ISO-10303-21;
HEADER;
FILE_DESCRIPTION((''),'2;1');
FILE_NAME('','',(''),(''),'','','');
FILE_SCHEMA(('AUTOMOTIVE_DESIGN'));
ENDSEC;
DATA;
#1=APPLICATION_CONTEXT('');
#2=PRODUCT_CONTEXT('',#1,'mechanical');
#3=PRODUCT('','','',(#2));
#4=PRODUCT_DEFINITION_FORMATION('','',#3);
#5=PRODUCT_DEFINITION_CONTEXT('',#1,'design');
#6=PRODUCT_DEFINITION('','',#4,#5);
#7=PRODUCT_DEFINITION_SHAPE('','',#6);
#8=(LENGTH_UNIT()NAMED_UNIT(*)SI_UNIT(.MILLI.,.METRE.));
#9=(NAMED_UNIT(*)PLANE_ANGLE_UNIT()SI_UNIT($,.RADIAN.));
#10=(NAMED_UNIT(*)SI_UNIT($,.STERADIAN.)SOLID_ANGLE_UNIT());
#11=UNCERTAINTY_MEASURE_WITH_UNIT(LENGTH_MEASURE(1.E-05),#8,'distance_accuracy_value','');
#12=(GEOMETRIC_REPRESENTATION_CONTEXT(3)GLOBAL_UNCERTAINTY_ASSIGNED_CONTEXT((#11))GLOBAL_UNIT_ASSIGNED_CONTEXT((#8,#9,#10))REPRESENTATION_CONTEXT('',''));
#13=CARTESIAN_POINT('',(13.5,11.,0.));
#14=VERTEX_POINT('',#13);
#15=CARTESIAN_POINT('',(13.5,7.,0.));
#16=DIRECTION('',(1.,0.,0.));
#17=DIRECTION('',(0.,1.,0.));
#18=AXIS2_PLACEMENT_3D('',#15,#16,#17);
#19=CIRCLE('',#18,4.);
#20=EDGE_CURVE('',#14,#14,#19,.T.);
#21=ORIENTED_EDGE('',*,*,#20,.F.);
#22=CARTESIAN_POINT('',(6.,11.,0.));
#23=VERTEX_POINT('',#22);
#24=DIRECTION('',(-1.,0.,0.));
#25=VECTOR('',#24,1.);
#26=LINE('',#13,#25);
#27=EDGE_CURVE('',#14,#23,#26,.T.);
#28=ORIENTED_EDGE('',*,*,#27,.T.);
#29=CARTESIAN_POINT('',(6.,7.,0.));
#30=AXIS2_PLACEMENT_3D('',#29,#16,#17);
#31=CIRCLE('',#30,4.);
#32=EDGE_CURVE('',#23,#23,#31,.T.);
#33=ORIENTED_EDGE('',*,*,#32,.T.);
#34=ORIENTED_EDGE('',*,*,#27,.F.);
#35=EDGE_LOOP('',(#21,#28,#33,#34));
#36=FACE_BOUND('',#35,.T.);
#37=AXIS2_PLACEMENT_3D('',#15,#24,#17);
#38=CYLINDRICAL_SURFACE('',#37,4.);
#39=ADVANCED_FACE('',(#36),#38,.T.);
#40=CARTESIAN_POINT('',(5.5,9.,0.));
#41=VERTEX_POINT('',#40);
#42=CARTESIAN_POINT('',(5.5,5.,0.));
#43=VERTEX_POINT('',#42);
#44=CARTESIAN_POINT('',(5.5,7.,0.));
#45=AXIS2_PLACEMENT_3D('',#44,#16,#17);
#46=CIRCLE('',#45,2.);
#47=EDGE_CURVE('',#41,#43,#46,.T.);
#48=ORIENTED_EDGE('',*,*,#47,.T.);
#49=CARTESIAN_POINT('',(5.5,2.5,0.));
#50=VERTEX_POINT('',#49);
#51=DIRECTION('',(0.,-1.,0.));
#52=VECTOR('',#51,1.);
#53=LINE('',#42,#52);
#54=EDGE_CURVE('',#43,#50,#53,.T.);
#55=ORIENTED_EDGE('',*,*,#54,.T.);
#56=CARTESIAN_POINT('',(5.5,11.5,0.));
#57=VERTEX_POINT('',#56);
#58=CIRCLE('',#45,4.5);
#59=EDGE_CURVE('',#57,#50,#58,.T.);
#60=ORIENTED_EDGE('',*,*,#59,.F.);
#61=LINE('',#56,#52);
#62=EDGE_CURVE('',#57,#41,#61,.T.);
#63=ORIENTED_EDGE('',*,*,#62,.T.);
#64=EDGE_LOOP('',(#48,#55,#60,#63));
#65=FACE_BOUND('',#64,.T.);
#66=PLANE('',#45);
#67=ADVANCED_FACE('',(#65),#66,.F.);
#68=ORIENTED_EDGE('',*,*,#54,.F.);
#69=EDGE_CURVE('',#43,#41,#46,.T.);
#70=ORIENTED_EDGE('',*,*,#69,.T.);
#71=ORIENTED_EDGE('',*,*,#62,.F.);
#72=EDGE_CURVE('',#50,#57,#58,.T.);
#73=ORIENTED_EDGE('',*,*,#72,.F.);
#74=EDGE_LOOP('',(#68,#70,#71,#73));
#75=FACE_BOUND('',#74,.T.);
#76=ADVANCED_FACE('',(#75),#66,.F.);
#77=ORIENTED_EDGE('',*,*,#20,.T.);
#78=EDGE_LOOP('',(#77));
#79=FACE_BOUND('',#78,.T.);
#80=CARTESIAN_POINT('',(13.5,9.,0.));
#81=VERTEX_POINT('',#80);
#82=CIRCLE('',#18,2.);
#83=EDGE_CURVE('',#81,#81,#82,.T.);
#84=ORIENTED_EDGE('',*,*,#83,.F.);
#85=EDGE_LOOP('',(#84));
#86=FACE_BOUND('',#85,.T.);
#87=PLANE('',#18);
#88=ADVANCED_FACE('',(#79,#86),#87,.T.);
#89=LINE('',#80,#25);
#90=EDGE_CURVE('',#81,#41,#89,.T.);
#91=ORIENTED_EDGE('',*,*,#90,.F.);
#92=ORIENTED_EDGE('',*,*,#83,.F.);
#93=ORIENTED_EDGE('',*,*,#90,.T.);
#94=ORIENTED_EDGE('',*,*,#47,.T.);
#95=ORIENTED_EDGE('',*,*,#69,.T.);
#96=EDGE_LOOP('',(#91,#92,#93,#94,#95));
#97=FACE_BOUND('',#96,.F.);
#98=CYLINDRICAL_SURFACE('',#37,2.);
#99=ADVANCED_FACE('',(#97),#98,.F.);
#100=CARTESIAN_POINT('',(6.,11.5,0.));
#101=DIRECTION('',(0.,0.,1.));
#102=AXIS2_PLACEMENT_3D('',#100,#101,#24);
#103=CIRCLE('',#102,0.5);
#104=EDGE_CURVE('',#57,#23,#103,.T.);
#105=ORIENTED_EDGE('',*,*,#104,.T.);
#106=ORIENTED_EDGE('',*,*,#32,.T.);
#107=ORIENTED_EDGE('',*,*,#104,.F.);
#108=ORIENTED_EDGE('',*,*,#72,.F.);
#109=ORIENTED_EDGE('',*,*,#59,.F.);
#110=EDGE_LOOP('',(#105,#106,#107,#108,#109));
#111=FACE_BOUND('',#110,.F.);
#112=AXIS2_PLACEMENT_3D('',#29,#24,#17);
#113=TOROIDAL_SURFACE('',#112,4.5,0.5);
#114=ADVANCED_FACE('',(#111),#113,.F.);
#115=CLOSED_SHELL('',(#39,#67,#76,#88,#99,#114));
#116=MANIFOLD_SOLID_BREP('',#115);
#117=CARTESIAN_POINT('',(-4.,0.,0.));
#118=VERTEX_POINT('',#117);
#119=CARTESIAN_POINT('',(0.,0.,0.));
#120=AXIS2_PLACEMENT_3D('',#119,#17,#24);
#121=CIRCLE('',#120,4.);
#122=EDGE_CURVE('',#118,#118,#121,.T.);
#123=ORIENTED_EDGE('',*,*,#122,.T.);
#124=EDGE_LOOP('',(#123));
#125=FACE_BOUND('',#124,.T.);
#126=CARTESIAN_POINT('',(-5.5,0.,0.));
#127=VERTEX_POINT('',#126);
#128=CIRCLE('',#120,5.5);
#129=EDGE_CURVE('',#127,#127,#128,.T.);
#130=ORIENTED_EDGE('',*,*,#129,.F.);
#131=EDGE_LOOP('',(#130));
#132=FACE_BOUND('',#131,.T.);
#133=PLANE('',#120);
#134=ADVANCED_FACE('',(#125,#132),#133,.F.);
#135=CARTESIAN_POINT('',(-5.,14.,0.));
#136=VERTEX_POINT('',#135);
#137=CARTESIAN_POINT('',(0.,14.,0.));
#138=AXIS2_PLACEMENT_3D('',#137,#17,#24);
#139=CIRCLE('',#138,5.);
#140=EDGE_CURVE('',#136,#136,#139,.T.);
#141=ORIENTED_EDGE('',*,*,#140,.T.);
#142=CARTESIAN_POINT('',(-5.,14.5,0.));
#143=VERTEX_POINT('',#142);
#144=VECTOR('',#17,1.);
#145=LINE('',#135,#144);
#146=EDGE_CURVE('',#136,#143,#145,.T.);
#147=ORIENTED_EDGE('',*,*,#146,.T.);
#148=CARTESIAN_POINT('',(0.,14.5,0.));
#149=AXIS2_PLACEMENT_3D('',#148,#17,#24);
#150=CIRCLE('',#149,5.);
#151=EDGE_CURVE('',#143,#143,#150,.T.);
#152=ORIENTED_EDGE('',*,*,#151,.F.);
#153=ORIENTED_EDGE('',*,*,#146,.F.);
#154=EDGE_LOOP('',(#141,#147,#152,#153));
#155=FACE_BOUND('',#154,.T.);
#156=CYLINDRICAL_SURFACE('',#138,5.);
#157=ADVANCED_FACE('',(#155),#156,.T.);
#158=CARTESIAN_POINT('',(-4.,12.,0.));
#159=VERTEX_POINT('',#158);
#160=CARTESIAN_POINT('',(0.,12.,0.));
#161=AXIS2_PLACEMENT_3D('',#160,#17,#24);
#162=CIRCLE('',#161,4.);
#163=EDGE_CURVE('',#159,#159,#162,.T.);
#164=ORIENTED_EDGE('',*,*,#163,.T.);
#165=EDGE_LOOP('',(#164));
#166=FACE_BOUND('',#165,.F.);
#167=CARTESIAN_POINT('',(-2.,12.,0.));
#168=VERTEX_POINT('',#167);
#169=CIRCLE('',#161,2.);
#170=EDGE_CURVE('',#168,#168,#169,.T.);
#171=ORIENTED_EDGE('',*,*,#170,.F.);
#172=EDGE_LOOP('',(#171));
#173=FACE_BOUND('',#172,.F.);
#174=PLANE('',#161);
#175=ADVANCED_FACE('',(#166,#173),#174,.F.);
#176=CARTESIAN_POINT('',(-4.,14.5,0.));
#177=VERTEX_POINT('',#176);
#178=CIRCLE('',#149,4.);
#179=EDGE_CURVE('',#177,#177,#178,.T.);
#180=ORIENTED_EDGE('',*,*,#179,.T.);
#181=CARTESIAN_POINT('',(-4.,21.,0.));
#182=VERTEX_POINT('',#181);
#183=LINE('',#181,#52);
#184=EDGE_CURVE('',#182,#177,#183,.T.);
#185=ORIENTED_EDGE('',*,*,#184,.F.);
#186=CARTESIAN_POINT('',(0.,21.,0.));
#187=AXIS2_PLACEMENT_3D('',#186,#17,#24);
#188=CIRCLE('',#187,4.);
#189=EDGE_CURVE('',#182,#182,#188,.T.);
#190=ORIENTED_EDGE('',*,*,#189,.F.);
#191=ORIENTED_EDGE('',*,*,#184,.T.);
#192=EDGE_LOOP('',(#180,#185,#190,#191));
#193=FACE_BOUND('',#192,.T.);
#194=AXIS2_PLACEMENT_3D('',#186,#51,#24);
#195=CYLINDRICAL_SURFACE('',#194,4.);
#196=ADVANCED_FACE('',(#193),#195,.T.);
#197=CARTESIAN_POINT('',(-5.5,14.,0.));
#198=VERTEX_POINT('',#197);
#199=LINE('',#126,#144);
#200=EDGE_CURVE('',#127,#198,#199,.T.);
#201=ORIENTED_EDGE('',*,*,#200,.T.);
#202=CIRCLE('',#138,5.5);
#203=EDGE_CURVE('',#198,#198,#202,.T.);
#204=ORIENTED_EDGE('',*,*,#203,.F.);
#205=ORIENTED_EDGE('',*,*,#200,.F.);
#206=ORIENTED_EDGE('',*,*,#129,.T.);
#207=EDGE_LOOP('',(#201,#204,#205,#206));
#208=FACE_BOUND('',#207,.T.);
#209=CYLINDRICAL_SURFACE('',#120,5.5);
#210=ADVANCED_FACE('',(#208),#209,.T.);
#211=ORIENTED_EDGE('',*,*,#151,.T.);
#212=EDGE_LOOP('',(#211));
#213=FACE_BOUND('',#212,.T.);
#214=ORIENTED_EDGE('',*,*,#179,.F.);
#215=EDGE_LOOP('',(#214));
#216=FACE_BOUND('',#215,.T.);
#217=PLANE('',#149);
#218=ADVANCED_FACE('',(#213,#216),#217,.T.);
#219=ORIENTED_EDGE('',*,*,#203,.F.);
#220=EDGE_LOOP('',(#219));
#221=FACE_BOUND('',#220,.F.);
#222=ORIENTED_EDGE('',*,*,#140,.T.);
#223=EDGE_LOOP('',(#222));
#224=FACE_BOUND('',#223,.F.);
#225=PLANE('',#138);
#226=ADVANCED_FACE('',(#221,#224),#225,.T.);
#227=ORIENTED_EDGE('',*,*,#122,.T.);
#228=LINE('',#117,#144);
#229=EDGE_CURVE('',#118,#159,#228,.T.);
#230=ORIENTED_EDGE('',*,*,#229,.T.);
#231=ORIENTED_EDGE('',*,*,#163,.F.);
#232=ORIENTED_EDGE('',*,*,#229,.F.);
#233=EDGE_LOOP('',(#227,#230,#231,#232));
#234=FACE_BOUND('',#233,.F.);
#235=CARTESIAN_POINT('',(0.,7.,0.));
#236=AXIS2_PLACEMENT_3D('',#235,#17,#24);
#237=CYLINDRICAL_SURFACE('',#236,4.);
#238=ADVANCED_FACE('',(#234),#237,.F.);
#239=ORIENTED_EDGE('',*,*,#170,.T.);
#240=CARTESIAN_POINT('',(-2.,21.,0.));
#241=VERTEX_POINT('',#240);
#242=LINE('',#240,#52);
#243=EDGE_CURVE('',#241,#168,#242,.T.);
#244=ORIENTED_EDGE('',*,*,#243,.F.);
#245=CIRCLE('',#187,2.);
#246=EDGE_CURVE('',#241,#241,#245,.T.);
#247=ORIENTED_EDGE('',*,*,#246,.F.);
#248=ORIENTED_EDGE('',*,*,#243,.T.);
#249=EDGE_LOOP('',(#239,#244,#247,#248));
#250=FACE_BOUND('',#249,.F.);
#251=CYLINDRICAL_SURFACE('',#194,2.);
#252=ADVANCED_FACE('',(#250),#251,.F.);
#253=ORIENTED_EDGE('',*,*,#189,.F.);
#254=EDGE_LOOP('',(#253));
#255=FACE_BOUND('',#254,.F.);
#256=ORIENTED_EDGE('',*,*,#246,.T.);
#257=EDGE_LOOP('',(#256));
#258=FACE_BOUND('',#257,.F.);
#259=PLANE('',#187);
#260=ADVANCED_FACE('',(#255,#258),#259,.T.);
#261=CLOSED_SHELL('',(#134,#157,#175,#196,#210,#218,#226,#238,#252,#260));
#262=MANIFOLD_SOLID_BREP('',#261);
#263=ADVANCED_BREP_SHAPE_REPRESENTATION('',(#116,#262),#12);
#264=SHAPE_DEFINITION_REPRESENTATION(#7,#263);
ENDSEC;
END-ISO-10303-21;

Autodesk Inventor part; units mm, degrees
ref_plane "YZ Plane" through (0, 0, 0) normal (1, 0, 0) x (0, 1, 0)
ref_plane "XZ Plane" through (0, 0, 0) normal (0, 1, 0) x (-1, 0, 0)
ref_plane "XY Plane" through (0, 0, 0) normal (0, 0, 1) x (1, 0, 0)
sketch "Boceto1" plane through (0, 0, 0) normal (0, 0, 1) x (1, 0, 0)
  line L0 (0, 0) -> (0, 21)
  line L1 (0, 7) -> (13.5, 7)
  line L2 (-2, 21) -> (-4, 21)
  line L3 (-4, 21) -> (-4, 14)
  line L4 (-4, 14) -> (-2, 14)
  line L5 (-2, 21) -> (-2, 14)
  line L6 (-4, 14) -> (-5, 14)
  line L7 (-5, 14) -> (-5, 14.5)
  line L8 (-5, 14.5) -> (-4, 14.5)
  line L9 (-5.5, 0) -> (-5.5, 14)
  line L10 (0, 0) -> (-5.5, 0)
  line L11 (-5, 14) -> (-5.5, 14)
  line L12 (-4, 0) -> (-4, 7)
  line L13 (-4, 7) -> (-4, 12)
  line L14 (-4, 12) -> (-2, 12)
  line L15 (-2, 12) -> (-2, 14)
  line L16 (13.5, 11) -> (6, 11)
  line L17 (13.5, 11) -> (13.5, 9)
  line L18 (13.5, 9) -> (5.5, 9)
  line L19 (5.5, 9) -> (5.5, 11)
  line L20 (13.5, 9) -> (13.5, 7)
  line L21 (5.5, 11) -> (5.5, 11.5)
  arc A0 (5.5, 11.5) -> (6, 11) centre (6, 11.5) ccw
  dimension "d0" = 21
  dimension "d1" = 7
  dimension "d2" = 4
  dimension "d3" = 8
  dimension "d4" = 10
  dimension "d5" = 7
  dimension "d6" = 0.5
  dimension "d7" = 14
  dimension "d8" = 11
  dimension "d9" = 8
  dimension "d10" = 7
  dimension "d11" = 12
  dimension "d12" = 8
  dimension "d13" = 8
  dimension "d14" = 4
  dimension "d17" = 13.5
  dimension "d18" = 1
revolve "Revolución1" add sketch "Boceto1" angle 360 about axis through (0, 0, 0) along (0, 1, 0) contours L5 L4 L3 L2 | L15 L14 L13 L12 L10 L9 L11 L6 L4 | L3 L6 L7 L8
revolve "Revolución2" add sketch "Boceto1" angle 360 about axis through (0, 7, 0) along (1, 0, 0) contours L17 L18 L19 L21 A0 L16
thread "Rosca1" size "M8x1" class "6g" standard "ANSI Metric M Profile" length 7
thread "Rosca2" size "M8x1" class "6g" standard "ANSI Metric M Profile" length 7
thread "Rosca3" size "M8x1" class "6H" standard "ANSI Metric M Profile" length 7
properties part number "Hudson 1-56"
